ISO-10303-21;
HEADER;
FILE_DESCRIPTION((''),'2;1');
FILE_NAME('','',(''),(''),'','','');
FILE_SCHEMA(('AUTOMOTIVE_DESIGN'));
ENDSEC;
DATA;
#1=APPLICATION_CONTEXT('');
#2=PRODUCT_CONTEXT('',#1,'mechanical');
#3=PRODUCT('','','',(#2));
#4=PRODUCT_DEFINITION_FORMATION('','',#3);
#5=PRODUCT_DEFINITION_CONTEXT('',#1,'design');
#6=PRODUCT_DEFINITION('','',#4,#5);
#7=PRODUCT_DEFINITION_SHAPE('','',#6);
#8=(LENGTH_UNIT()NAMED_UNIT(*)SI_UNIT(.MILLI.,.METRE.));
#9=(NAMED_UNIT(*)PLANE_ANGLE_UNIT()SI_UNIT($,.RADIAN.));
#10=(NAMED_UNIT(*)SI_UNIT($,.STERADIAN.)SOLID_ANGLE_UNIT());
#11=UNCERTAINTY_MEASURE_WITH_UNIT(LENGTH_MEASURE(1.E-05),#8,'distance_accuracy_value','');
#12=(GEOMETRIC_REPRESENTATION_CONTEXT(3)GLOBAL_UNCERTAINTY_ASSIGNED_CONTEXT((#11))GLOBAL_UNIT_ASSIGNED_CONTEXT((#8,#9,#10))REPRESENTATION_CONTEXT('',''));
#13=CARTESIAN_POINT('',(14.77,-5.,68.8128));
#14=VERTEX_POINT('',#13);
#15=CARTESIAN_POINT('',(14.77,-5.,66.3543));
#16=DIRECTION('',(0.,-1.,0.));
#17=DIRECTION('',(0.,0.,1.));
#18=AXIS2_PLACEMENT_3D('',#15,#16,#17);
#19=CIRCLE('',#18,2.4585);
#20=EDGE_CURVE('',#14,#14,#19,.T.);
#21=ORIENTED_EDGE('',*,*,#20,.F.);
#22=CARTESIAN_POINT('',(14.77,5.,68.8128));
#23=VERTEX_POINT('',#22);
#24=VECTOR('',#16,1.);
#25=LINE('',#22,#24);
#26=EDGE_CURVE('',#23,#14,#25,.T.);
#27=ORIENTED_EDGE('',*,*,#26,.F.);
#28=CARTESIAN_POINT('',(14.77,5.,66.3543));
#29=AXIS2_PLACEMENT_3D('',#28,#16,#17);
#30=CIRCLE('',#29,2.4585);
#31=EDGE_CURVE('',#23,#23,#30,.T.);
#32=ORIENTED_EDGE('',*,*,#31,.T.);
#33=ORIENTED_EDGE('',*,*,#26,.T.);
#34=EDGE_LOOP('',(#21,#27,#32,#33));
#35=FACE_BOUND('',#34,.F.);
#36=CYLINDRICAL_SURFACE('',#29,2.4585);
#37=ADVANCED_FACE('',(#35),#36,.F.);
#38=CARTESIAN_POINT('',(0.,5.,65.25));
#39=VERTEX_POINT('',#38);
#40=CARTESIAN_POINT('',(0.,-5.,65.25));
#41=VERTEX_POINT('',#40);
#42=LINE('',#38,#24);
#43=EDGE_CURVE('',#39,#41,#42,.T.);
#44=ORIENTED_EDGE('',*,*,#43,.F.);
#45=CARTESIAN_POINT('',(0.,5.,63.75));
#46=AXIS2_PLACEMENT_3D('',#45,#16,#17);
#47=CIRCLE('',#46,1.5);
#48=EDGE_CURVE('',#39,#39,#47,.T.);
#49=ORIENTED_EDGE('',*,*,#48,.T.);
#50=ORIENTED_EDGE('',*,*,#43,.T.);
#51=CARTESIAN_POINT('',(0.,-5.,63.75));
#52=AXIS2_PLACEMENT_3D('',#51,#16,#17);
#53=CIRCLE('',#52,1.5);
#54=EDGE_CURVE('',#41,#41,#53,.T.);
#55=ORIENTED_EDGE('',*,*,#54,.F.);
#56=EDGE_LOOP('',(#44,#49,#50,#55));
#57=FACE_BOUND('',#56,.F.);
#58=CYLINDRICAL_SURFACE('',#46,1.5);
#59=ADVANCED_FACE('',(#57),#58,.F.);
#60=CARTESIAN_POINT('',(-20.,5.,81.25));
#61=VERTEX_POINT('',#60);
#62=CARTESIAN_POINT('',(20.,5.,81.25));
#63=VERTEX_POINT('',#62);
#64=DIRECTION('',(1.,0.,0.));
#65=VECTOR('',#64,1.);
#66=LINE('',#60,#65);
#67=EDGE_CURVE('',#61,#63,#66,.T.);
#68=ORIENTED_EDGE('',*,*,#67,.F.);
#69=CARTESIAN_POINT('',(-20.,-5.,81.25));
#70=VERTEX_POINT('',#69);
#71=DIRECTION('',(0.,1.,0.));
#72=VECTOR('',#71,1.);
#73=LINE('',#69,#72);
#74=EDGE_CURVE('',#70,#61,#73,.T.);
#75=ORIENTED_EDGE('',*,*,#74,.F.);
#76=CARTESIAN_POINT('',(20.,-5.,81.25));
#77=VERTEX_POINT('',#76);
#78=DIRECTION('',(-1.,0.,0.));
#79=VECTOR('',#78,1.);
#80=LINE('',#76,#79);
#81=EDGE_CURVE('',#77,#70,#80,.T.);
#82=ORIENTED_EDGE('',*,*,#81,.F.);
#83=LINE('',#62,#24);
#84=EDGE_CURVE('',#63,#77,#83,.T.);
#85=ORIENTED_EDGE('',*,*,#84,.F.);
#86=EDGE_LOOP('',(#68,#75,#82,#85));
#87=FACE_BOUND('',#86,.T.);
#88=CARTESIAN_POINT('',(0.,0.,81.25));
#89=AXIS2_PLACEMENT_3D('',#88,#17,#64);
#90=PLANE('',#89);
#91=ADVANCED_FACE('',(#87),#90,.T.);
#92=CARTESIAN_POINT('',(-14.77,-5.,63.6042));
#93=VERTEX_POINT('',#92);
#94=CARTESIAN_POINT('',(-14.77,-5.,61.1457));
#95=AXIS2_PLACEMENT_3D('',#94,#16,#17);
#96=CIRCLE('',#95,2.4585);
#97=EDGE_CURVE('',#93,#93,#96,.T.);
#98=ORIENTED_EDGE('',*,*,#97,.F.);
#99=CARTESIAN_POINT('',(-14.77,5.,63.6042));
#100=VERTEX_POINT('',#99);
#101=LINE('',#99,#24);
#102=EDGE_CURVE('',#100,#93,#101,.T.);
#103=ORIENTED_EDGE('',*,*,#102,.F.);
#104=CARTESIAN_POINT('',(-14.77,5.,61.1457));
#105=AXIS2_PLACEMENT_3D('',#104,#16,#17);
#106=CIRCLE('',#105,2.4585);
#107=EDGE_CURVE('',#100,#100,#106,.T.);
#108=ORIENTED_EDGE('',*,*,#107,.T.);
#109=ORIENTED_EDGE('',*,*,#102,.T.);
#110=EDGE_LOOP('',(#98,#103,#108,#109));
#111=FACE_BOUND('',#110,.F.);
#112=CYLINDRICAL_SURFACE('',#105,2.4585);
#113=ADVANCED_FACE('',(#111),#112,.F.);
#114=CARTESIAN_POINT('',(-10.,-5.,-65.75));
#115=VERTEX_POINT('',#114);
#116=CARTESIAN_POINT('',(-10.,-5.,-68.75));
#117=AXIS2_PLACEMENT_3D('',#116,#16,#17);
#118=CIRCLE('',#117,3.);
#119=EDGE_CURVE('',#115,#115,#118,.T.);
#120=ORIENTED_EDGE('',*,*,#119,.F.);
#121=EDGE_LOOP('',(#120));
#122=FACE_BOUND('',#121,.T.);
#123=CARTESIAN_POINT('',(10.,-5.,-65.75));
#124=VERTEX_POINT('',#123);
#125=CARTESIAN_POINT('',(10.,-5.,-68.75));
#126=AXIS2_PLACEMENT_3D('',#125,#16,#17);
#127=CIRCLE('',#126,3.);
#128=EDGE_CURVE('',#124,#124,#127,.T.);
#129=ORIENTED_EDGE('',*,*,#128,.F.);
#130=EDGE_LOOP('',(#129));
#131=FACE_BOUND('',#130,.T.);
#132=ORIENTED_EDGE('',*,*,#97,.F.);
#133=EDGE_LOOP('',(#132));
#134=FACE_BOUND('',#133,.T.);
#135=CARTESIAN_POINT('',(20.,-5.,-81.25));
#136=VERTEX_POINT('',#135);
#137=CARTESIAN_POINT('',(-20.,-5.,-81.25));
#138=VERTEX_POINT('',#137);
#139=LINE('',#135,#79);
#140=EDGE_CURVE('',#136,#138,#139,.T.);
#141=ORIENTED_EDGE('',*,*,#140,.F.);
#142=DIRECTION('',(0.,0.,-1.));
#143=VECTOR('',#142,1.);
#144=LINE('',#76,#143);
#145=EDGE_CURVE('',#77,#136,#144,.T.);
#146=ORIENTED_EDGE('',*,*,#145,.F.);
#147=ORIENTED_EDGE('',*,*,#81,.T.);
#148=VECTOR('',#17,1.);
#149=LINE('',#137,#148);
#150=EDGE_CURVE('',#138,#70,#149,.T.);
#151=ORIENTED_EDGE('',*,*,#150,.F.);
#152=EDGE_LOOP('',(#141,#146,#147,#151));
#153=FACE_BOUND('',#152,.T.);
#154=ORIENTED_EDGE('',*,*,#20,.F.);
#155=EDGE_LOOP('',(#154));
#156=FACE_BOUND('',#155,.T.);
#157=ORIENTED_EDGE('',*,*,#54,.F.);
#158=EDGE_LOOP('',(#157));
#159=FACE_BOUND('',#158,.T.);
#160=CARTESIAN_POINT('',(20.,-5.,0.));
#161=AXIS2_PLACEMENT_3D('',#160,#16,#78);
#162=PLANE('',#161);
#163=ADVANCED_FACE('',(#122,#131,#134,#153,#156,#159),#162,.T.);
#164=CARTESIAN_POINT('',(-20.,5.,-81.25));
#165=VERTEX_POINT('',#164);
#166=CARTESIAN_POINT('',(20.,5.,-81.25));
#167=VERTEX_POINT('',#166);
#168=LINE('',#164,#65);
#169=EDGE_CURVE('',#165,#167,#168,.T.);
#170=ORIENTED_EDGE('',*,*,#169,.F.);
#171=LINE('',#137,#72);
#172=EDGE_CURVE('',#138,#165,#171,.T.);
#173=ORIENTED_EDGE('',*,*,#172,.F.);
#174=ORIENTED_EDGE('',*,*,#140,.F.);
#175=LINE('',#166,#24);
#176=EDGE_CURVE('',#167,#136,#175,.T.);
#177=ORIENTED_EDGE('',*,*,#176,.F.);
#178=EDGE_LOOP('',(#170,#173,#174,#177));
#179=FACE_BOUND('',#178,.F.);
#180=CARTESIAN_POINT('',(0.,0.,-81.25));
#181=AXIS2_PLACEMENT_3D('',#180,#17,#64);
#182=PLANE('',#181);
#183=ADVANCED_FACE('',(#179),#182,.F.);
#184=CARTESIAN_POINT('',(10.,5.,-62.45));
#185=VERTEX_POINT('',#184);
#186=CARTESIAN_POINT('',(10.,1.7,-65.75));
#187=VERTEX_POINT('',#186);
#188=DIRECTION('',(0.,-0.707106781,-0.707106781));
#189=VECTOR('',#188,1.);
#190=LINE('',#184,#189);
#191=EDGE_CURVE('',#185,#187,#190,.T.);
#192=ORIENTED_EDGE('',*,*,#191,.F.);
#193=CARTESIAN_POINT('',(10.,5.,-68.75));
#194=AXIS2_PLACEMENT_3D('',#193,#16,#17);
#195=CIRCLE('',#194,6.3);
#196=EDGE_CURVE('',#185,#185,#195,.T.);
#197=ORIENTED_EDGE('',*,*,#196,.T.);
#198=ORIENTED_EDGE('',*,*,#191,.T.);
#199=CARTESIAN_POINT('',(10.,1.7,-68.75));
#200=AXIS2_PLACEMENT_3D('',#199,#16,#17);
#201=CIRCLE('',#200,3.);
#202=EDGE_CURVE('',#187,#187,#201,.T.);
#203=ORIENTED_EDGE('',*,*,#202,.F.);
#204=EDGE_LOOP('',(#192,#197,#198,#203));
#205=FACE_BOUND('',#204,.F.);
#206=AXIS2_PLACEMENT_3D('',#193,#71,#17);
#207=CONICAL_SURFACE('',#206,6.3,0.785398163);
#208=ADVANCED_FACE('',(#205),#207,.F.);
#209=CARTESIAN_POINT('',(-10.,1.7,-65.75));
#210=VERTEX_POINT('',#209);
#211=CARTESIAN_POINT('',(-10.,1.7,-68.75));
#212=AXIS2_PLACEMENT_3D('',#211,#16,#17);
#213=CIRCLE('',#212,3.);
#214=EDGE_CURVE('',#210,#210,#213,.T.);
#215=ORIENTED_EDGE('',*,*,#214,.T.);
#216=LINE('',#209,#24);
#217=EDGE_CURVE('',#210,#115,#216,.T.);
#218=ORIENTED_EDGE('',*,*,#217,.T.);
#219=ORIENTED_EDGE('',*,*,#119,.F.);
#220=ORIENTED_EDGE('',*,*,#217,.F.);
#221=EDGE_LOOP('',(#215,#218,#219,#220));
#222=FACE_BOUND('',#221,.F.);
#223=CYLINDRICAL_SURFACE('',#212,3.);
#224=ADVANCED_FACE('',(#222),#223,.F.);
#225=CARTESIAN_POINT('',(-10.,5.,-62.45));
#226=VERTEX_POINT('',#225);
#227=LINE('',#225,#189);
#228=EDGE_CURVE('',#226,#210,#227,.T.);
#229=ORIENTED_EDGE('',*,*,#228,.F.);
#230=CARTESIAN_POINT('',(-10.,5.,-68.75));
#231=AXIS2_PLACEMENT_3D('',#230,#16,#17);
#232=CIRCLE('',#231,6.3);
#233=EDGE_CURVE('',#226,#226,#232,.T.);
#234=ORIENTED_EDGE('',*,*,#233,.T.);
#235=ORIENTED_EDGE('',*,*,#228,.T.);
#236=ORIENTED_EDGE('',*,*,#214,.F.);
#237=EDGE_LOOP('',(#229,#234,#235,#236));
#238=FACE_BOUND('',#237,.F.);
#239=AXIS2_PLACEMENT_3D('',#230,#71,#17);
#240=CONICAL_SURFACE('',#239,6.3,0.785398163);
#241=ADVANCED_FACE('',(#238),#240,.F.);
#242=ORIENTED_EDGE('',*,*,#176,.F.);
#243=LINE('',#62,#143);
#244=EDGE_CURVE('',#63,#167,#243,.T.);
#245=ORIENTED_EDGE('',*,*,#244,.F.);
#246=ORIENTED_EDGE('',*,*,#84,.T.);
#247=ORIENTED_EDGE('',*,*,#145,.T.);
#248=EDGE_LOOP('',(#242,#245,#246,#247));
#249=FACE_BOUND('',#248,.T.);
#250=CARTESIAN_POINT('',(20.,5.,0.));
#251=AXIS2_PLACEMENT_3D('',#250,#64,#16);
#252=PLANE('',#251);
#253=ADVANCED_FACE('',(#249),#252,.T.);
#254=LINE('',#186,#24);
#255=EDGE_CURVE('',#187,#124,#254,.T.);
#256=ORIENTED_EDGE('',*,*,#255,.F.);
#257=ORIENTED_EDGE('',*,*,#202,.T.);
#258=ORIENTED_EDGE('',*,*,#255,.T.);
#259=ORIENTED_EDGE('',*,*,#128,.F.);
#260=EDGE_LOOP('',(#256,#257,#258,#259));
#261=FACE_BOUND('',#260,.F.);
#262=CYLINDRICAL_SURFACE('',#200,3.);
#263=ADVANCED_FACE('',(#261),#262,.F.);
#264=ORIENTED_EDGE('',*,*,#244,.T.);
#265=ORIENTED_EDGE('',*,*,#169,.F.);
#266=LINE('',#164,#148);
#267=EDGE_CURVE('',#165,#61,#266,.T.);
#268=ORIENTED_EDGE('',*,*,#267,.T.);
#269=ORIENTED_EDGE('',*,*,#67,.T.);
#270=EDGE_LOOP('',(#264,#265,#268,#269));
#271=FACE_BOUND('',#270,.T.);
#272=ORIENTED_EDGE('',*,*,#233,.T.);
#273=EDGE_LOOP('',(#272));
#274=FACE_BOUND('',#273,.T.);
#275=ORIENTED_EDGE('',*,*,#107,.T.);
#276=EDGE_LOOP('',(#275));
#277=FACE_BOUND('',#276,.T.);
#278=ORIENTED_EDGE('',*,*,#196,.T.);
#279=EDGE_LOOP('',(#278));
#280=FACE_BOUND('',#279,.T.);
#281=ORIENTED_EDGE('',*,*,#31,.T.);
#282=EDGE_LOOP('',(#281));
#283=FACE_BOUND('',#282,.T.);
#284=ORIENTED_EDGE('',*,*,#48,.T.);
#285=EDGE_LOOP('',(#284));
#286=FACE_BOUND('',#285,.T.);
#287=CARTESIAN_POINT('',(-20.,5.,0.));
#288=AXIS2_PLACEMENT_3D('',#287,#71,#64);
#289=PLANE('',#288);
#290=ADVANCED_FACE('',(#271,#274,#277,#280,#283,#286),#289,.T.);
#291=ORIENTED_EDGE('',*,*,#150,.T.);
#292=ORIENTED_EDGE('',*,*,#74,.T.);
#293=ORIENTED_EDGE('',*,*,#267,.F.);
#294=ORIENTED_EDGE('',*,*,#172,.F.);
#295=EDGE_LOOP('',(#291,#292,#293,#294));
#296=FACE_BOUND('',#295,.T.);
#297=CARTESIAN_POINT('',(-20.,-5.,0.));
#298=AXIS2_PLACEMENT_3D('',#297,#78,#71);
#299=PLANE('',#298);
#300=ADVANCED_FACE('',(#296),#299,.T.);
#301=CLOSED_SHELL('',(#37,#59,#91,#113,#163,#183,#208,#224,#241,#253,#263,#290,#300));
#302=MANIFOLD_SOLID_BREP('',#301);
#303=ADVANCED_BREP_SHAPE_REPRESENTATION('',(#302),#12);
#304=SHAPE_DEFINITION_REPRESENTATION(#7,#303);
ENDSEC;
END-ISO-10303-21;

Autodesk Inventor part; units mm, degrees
ref_plane "YZ Plane" through (0, 0, 0) normal (1, 0, 0) x (0, 1, 0)
ref_plane "XZ Plane" through (0, 0, 0) normal (0, 1, 0) x (-1, 0, 0)
ref_plane "XY Plane" through (0, 0, 0) normal (0, 0, 1) x (1, 0, 0)
sketch "Sketch1" plane through (0, 0, 0) normal (0, 0, 1) x (1, 0, 0)
  line L0 (-20, 5) -> (20, 5)
  line L1 (20, 5) -> (20, -5)
  line L2 (20, -5) -> (-20, -5)
  line L3 (-20, -5) -> (-20, 5)
  line L4 (-20, 5) -> (20, -5) construction
  line L5 (20, 5) -> (-20, -5) construction
  point P0 (0, 0)
extrude "Extrusion1" add sketch "Sketch1" along normal mid plane 162.5
sketch "Sketch4" plane through (-20, 5, 81.25) normal (0, 1, 0) x (1, 0, 0)
  line L0 (0, 162.5) -> (40, 162.5) projected
  point P0 (20, 81.25)
  point P1 (10, 150)
  point P2 (30, 150)
  dimension "d28" = 10
  dimension "d29" = 20
  dimension "d30" = 12.5
hole "Hole3" at (-10, 5, -68.75) at (10, 5, -68.75) direction (0, -1, 0) diameter 6 depth 10.4 countersink diameter 12.6 countersink angle 90
sketch "Sketch5" plane through (-20, 5, 81.25) normal (0, 1, 0) x (1, 0, 0)
  circle A0 centre (30, 150) radius 6.3 projected
  point P0 (20, 81.25)
  point P1 (20, 17.5)
  dimension "d38" = 132.5
hole "Hole4" at (0, 5, 63.75) direction (0, -1, 0) diameter 3 depth 10.4
sketch "Sketch6" plane through (-20, 5, 81.25) normal (0, 1, 0) x (1, 0, 0)
  circle A0 centre (20, 17.5) radius 1.5 projected
  line L0 (20, 17.5) -> (3, 17.5) construction
  line L1 (5.23, 20.1043) -> (20, 17.5) construction
  line L2 (20, 17.5) -> (34.77, 14.8957) construction
  point P0 (20, 81.25)
  dimension "d46" = 10
  dimension "d47" = 10
  dimension "d48" = 14.77
  dimension "d49" = 14.77
hole "Hole5" at (-14.77, 5, 61.1457) at (14.77, 5, 66.3543) direction (0, -1, 0) diameter 4.917 depth 17.1 thread size "M6x1" class "6H" standard "ISO Metric profile"
equation "\"d49\" = d48"
properties part number "Support Beam" material "Brass, Soft Yellow"
